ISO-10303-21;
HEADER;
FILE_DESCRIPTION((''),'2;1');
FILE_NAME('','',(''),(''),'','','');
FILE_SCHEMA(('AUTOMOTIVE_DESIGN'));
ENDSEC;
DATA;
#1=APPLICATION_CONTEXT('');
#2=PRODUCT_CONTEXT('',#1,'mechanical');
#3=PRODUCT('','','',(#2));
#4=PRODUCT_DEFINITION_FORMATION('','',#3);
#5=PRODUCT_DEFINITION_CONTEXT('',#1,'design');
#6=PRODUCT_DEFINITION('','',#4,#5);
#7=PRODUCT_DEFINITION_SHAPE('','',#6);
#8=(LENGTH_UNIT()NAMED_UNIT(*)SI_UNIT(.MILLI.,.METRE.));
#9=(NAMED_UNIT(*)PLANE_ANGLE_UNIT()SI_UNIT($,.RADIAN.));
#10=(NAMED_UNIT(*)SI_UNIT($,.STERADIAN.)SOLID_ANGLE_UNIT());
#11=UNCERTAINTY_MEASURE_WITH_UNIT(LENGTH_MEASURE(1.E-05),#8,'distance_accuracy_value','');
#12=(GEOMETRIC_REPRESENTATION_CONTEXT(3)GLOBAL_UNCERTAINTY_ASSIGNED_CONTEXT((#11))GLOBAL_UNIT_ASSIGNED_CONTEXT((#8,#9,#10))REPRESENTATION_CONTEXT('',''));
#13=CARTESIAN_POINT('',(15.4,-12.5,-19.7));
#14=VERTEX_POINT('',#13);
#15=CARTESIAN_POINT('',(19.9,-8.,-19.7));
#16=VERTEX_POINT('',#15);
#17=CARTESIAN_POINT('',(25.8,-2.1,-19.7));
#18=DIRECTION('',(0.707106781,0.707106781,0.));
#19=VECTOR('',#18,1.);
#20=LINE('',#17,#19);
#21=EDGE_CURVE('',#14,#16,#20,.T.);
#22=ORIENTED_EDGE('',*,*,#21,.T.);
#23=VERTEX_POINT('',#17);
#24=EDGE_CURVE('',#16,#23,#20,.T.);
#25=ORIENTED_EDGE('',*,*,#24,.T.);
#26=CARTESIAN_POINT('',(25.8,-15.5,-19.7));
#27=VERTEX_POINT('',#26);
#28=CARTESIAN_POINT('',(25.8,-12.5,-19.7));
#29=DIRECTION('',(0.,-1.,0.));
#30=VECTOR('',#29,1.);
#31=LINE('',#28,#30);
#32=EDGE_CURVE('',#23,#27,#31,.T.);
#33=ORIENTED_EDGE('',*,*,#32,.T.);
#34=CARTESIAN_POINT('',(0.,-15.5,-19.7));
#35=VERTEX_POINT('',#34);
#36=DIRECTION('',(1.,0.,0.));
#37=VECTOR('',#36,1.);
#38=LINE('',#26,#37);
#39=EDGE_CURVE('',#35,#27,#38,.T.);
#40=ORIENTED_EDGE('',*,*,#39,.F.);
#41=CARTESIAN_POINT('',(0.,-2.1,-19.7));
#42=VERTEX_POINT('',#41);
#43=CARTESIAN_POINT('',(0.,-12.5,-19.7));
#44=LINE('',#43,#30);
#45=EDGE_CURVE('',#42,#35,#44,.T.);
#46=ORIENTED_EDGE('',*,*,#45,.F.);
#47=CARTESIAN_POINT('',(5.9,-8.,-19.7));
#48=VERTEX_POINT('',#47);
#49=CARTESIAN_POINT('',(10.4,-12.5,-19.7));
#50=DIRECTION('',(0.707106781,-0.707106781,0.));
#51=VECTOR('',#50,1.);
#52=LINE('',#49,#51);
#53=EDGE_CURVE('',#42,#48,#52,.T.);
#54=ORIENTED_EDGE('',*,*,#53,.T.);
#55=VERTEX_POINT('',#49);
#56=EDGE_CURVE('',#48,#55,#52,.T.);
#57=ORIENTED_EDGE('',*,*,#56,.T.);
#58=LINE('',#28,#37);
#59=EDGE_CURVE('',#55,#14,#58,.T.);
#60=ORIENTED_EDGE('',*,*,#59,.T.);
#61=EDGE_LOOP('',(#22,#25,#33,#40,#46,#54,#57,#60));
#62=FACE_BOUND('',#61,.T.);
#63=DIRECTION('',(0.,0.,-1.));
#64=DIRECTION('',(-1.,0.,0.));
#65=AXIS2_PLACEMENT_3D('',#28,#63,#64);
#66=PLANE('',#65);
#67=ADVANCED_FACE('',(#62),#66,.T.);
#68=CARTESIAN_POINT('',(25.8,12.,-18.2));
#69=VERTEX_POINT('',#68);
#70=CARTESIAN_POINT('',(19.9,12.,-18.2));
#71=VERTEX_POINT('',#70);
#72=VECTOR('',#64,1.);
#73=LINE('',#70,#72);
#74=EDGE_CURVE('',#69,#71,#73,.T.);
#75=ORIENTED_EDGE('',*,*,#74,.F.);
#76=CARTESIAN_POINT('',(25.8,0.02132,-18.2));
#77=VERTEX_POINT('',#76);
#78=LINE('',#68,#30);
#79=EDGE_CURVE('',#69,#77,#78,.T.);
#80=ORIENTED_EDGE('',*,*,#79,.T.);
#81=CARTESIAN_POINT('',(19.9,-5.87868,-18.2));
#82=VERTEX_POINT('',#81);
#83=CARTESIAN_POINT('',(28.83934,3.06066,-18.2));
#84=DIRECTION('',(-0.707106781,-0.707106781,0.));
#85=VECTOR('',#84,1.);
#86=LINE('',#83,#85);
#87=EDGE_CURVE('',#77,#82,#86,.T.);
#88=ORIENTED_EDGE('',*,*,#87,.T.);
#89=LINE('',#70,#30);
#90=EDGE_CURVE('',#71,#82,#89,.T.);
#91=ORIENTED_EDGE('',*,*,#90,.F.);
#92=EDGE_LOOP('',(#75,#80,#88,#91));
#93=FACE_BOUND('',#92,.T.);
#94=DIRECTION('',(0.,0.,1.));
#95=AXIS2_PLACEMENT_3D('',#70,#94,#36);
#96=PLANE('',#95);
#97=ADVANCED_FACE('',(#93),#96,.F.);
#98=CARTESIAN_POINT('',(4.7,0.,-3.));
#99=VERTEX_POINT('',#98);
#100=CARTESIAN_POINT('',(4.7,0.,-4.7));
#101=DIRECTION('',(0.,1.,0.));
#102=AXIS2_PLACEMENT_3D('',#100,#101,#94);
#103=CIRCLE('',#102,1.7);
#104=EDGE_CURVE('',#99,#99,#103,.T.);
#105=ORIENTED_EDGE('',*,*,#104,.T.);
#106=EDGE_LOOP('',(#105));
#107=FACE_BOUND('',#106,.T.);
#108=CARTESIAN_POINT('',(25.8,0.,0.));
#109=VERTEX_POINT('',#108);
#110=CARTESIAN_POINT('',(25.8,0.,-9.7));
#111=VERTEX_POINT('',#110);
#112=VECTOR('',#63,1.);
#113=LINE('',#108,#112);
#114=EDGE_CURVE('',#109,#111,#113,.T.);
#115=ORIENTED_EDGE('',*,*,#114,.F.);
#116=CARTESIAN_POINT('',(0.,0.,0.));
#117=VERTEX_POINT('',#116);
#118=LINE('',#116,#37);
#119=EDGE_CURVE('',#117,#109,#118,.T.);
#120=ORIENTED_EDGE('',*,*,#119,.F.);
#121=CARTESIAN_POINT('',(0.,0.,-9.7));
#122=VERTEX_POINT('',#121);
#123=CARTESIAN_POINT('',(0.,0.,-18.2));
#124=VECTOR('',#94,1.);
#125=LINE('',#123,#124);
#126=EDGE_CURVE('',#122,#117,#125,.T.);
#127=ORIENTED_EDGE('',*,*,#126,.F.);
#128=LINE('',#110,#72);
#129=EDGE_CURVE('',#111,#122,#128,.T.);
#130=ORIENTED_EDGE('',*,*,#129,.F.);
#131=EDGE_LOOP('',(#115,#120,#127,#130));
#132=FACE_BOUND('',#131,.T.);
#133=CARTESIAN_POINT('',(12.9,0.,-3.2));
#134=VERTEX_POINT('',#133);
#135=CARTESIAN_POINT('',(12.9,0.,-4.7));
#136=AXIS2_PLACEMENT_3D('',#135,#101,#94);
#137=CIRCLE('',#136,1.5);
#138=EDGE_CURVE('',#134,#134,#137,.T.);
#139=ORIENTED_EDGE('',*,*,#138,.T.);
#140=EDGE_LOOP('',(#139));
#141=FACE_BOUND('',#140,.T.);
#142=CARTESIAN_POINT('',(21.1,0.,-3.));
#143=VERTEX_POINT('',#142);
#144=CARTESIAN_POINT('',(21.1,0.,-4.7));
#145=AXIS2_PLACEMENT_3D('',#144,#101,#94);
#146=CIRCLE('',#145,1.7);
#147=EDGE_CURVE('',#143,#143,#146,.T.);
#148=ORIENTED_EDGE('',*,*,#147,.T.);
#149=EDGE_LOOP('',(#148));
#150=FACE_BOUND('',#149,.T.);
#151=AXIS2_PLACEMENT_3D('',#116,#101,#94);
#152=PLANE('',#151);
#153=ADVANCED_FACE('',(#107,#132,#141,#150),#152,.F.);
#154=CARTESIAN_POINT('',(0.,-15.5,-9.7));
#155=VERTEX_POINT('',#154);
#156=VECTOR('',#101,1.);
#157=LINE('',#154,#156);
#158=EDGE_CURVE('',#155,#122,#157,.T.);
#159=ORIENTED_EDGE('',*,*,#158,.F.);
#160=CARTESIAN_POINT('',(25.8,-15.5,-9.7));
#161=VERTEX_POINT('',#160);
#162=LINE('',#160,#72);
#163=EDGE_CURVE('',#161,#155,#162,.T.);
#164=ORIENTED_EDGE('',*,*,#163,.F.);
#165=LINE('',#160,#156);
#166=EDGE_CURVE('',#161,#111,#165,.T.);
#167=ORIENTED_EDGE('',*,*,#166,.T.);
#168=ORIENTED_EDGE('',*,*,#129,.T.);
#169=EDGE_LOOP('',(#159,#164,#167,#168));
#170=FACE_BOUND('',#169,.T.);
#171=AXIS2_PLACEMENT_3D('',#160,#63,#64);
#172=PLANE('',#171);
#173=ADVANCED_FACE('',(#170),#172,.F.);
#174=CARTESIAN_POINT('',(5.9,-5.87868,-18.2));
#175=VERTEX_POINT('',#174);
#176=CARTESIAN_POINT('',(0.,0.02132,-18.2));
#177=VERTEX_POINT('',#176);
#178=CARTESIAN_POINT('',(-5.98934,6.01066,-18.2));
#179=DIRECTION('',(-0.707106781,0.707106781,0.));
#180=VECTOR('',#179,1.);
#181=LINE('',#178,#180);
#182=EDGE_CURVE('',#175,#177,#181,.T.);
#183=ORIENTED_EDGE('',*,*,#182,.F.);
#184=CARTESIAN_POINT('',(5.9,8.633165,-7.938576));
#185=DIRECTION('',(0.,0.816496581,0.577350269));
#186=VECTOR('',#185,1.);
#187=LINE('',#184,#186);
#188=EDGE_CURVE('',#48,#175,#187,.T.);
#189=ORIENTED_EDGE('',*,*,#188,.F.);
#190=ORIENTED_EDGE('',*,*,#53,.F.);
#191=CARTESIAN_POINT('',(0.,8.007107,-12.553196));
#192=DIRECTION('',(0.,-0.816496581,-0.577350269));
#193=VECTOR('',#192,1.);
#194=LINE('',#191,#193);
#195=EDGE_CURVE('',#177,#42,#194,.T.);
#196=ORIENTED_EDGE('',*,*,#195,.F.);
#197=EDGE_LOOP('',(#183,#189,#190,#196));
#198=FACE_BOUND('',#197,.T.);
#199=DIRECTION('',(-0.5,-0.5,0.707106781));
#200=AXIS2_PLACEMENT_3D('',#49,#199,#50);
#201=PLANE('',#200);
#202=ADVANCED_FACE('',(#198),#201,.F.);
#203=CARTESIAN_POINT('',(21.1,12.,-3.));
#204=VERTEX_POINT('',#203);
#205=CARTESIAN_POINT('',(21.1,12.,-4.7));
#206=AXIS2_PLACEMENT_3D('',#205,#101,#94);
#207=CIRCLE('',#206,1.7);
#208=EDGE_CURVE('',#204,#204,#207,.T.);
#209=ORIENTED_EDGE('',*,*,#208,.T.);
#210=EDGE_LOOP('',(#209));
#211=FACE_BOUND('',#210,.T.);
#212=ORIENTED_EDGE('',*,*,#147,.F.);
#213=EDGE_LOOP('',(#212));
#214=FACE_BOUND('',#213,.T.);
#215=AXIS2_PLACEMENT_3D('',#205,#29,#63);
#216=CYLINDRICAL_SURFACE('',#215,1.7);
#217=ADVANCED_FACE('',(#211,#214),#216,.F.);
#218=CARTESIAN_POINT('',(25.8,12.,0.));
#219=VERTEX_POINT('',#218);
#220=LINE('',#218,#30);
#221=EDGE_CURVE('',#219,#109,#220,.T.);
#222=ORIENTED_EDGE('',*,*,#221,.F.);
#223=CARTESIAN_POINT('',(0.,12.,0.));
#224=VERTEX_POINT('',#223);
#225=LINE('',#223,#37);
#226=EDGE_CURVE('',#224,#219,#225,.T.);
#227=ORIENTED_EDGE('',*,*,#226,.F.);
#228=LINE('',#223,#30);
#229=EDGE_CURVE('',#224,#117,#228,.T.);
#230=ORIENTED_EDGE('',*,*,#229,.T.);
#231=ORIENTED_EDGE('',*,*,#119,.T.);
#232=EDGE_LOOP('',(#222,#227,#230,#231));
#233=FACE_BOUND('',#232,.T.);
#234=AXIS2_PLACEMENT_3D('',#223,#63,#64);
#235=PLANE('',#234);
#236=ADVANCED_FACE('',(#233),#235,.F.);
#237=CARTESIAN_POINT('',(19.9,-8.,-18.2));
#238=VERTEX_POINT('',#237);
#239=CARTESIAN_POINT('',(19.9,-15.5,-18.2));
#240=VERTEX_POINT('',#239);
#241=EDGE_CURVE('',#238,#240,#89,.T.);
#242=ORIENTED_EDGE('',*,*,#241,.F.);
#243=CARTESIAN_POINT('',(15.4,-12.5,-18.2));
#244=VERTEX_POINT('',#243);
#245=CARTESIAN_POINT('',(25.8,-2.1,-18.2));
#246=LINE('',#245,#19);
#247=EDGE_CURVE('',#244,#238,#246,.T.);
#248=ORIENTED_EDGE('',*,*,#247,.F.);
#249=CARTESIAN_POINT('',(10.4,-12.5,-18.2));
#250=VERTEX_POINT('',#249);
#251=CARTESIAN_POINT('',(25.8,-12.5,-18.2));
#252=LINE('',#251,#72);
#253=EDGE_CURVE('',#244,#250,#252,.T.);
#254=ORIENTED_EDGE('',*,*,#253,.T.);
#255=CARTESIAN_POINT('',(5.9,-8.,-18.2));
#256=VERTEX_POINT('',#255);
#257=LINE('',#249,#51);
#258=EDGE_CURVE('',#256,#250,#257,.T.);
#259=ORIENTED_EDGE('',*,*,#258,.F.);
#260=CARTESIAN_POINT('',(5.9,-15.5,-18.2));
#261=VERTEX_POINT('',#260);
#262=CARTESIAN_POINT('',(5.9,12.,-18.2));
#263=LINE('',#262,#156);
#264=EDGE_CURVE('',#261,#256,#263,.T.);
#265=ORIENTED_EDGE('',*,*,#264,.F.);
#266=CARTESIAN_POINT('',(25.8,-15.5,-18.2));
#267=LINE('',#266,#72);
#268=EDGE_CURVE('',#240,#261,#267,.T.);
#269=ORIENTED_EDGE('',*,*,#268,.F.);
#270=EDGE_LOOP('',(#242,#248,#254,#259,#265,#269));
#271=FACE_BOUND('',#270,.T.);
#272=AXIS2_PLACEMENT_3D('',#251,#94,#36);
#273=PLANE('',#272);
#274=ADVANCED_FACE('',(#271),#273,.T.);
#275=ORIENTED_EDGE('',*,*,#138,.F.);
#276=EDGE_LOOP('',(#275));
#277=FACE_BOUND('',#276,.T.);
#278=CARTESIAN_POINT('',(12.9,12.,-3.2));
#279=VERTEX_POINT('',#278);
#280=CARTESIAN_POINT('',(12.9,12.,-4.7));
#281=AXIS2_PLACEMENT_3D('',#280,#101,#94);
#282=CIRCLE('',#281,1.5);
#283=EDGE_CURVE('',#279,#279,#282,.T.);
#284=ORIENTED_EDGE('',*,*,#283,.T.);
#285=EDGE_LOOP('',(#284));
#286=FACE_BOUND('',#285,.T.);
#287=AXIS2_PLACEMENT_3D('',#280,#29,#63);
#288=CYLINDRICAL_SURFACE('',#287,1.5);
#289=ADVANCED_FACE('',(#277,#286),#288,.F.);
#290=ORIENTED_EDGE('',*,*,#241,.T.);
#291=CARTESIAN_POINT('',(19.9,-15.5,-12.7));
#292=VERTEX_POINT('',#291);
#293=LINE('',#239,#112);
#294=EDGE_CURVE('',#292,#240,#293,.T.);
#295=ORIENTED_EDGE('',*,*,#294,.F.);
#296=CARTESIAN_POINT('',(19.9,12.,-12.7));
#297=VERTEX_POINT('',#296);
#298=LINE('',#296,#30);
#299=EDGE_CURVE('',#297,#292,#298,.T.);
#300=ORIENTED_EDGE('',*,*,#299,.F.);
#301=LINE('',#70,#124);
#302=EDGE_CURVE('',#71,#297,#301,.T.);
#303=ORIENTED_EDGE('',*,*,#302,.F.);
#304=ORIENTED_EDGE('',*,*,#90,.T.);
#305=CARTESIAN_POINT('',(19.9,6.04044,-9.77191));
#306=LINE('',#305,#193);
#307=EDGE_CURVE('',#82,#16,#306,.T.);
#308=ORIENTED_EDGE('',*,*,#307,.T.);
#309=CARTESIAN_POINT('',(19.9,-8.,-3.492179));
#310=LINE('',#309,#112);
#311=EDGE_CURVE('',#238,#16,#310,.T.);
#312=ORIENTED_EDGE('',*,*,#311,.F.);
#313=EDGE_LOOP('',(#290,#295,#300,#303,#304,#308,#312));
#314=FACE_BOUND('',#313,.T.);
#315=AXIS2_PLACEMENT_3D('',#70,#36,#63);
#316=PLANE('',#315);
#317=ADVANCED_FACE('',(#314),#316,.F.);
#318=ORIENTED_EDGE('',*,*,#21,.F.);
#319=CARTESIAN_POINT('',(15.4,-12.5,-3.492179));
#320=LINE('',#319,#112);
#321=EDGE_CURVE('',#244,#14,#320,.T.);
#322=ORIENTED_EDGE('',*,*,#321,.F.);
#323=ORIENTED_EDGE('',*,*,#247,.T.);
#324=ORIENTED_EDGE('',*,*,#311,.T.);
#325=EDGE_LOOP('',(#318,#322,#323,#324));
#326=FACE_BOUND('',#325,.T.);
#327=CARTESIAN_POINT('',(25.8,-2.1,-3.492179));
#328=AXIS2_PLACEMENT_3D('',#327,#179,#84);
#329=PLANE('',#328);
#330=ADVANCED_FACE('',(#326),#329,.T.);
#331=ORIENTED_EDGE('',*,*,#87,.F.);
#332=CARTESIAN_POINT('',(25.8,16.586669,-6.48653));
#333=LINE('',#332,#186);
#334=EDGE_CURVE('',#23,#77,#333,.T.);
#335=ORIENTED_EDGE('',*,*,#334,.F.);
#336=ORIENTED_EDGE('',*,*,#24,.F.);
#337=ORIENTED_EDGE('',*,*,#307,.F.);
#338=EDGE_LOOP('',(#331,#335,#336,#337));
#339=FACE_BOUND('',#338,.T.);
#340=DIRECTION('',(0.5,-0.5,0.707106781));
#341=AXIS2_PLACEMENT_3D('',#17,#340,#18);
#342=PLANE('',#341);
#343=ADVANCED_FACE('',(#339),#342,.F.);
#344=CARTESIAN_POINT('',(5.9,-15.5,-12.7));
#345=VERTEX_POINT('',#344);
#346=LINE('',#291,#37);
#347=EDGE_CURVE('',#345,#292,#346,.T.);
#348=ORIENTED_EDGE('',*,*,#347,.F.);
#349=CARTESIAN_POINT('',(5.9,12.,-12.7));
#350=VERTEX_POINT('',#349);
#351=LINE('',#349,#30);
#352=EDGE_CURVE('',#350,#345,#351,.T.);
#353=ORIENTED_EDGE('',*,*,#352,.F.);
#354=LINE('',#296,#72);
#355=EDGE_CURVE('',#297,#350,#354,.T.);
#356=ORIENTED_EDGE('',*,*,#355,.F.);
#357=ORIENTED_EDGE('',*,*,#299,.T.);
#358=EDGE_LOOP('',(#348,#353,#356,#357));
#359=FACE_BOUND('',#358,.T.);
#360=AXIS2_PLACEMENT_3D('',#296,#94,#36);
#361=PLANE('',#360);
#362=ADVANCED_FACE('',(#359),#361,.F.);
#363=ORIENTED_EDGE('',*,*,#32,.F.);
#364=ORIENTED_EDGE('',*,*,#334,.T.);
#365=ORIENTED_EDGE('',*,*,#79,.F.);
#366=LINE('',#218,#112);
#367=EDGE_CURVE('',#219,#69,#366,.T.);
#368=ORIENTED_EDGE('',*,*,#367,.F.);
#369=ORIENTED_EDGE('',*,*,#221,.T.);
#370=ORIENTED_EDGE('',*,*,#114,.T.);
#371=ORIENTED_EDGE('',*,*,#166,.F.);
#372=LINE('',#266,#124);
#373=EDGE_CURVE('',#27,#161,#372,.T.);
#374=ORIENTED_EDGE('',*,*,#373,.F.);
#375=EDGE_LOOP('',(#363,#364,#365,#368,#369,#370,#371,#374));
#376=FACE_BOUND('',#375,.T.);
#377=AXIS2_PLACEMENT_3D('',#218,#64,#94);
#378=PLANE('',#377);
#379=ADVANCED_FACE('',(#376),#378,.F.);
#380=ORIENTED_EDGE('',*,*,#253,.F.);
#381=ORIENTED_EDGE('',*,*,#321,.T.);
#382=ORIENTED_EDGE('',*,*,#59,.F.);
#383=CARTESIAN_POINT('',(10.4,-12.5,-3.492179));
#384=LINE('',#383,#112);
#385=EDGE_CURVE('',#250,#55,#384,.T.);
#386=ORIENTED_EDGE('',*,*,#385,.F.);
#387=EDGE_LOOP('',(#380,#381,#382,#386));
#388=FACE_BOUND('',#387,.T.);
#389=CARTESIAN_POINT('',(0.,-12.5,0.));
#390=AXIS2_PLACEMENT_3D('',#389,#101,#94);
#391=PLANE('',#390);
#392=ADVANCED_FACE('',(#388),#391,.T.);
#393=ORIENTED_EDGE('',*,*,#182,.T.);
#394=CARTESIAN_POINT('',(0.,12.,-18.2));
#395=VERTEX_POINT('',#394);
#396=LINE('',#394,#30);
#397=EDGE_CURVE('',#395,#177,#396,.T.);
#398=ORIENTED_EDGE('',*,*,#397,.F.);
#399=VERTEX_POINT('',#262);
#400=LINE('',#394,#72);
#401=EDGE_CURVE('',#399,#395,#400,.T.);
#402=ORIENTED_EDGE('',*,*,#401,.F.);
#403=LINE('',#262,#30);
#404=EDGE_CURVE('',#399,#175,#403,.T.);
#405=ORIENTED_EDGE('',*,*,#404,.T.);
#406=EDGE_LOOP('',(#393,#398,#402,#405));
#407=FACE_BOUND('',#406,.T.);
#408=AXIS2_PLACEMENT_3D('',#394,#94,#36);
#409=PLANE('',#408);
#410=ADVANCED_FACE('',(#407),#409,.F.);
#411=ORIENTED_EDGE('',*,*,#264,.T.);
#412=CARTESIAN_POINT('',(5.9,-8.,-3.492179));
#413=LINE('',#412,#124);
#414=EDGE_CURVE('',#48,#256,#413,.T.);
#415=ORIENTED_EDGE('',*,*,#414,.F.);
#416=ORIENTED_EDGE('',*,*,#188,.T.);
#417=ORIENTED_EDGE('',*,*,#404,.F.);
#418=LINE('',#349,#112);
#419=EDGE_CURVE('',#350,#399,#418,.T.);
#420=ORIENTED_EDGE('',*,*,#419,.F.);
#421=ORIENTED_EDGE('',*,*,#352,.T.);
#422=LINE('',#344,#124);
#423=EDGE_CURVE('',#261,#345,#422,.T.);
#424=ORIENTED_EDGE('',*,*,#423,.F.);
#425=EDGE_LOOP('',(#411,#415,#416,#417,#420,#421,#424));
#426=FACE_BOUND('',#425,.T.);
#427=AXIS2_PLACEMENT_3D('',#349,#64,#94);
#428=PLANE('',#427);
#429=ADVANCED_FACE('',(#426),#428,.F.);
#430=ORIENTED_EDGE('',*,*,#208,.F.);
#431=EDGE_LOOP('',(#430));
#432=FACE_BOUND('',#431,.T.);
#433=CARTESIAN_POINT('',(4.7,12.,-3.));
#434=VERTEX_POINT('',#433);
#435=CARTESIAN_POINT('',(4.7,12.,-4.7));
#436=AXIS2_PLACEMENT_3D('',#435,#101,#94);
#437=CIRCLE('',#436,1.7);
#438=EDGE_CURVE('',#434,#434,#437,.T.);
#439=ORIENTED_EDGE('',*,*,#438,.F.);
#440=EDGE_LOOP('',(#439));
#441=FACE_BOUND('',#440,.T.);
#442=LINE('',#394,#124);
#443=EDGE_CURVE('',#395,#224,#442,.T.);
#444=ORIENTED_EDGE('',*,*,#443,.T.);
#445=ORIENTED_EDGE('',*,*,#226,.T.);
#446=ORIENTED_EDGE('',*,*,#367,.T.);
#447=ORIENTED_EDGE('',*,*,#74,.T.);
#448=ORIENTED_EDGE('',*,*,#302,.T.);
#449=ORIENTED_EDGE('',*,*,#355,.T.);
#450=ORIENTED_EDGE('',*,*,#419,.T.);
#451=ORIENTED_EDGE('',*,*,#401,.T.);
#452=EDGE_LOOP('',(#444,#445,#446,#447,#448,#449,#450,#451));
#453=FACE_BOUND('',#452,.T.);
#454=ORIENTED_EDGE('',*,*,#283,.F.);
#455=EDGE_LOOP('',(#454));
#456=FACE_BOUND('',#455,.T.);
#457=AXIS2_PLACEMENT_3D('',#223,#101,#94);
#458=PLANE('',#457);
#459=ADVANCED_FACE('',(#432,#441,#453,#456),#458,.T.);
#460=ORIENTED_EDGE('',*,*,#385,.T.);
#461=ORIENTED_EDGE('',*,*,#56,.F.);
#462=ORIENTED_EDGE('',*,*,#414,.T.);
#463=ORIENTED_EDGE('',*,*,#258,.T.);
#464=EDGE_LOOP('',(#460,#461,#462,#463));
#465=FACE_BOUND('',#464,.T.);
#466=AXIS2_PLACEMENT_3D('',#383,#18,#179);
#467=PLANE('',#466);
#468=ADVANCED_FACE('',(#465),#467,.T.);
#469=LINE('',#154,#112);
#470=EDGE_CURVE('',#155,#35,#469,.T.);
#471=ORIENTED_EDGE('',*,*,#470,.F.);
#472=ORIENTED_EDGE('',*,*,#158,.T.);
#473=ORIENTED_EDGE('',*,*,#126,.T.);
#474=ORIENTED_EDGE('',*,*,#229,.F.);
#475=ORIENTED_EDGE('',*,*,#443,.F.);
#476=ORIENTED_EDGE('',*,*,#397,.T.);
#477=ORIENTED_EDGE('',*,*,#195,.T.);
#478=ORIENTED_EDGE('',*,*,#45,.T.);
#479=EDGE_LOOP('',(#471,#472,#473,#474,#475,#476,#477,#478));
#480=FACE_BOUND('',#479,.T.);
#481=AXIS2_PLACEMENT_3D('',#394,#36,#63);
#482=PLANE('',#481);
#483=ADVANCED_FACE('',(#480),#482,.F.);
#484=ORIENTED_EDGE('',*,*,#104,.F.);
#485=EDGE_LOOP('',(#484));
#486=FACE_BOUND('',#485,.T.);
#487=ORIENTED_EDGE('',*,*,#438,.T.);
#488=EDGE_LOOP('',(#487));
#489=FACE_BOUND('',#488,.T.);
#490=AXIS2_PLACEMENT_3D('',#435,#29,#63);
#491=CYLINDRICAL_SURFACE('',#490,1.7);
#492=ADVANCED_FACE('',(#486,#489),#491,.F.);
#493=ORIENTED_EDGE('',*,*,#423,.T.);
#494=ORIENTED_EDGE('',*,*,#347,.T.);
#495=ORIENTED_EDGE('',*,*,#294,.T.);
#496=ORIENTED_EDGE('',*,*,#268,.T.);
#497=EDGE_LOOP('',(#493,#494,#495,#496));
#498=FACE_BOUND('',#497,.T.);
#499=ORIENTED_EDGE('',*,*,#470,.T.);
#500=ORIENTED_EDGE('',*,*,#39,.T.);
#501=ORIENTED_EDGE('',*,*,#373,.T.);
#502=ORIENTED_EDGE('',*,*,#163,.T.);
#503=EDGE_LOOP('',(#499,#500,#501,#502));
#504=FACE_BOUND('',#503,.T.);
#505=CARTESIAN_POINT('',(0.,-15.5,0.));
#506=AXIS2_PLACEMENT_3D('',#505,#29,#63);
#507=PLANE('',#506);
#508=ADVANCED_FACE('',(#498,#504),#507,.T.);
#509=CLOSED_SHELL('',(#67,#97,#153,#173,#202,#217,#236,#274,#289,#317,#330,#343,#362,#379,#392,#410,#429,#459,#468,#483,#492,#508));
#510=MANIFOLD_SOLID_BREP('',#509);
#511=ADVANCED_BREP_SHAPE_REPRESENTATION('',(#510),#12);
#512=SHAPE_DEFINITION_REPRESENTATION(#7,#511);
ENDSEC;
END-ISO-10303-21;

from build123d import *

# Parameters (mm, degrees)
SKETCH1_R           = 1.7
SKETCH1_R_2         = 1.5
BOSS_EXTRUDE1_DEPTH = 12
BOSS_EXTRUDE2_DEPTH = 15.5
SKETCH5_W           = 25.8
SKETCH5_H           = 1.5
BOSS_EXTRUDE3_DEPTH = 3
BOSS_EXTRUDE4_DEPTH = 1.5
CHAMFER1_SIZE       = 1.5


with BuildPart() as part:
    # Sketch1 → Boss-Extrude1 (new body)
    with BuildSketch(Plane(origin=(0, 0, 0), x_dir=(1, 0, 0), z_dir=(0, 1, 0))):
        Polygon((0, 0), (25.8, 0), (25.8, 18.2), (19.9, 18.2), (19.9, 12.7), (5.9, 12.7), (5.9, 18.2), (0, 18.2), align=None)
        with Locations(Location((4.7, 4.7, 0), (0, 0, 270))):
            Circle(SKETCH1_R, mode=Mode.SUBTRACT)
        with Locations(Location((12.9, 4.7, 0), (0, 0, 270))):
            Circle(SKETCH1_R_2, mode=Mode.SUBTRACT)
        with Locations(Location((21.1, 4.7, 0), (0, 0, 270))):
            Circle(SKETCH1_R, mode=Mode.SUBTRACT)
    extrude(amount=BOSS_EXTRUDE1_DEPTH)

    # Sketch4 → Boss-Extrude2 (add)
    with BuildSketch(Plane.XZ):
        Polygon((19.9, -18.2), (19.9, -12.7), (5.9, -12.7), (5.9, -18.2), (0, -18.2), (0, -9.7), (25.8, -9.7), (25.8, -18.2), align=None)
    extrude(amount=BOSS_EXTRUDE2_DEPTH)

    # Sketch5 → Boss-Extrude3 (add)
    with BuildSketch(Plane.XZ.offset(15.5)):
        with Locations((12.9, -18.95)):
            Rectangle(SKETCH5_W, SKETCH5_H)
    extrude(amount=-BOSS_EXTRUDE3_DEPTH)

    # Sketch6 → Boss-Extrude4 (add)
    with BuildSketch(Plane(origin=(0, 0, -19.7), x_dir=(-1, 0, 0), z_dir=(0, 0, -1))):
        Polygon((-25.8, -12.5), (-25.8, -2.1), (-15.4, -12.5), align=None)
        Polygon((0, -12.5), (-10.4, -12.5), (0, -2.1), align=None)
    extrude(amount=-BOSS_EXTRUDE4_DEPTH)

    # Chamfer1
    chamfer1_edges = [part.edges().sort_by_distance(p)[0] for p in [
        (22.85, -5.05, -18.2),
        (2.95, -5.05, -18.2),
    ]]
    chamfer(chamfer1_edges, length=CHAMFER1_SIZE - 0.0001)  # a hair under: the kernel refuses the full size


solid = part.part
